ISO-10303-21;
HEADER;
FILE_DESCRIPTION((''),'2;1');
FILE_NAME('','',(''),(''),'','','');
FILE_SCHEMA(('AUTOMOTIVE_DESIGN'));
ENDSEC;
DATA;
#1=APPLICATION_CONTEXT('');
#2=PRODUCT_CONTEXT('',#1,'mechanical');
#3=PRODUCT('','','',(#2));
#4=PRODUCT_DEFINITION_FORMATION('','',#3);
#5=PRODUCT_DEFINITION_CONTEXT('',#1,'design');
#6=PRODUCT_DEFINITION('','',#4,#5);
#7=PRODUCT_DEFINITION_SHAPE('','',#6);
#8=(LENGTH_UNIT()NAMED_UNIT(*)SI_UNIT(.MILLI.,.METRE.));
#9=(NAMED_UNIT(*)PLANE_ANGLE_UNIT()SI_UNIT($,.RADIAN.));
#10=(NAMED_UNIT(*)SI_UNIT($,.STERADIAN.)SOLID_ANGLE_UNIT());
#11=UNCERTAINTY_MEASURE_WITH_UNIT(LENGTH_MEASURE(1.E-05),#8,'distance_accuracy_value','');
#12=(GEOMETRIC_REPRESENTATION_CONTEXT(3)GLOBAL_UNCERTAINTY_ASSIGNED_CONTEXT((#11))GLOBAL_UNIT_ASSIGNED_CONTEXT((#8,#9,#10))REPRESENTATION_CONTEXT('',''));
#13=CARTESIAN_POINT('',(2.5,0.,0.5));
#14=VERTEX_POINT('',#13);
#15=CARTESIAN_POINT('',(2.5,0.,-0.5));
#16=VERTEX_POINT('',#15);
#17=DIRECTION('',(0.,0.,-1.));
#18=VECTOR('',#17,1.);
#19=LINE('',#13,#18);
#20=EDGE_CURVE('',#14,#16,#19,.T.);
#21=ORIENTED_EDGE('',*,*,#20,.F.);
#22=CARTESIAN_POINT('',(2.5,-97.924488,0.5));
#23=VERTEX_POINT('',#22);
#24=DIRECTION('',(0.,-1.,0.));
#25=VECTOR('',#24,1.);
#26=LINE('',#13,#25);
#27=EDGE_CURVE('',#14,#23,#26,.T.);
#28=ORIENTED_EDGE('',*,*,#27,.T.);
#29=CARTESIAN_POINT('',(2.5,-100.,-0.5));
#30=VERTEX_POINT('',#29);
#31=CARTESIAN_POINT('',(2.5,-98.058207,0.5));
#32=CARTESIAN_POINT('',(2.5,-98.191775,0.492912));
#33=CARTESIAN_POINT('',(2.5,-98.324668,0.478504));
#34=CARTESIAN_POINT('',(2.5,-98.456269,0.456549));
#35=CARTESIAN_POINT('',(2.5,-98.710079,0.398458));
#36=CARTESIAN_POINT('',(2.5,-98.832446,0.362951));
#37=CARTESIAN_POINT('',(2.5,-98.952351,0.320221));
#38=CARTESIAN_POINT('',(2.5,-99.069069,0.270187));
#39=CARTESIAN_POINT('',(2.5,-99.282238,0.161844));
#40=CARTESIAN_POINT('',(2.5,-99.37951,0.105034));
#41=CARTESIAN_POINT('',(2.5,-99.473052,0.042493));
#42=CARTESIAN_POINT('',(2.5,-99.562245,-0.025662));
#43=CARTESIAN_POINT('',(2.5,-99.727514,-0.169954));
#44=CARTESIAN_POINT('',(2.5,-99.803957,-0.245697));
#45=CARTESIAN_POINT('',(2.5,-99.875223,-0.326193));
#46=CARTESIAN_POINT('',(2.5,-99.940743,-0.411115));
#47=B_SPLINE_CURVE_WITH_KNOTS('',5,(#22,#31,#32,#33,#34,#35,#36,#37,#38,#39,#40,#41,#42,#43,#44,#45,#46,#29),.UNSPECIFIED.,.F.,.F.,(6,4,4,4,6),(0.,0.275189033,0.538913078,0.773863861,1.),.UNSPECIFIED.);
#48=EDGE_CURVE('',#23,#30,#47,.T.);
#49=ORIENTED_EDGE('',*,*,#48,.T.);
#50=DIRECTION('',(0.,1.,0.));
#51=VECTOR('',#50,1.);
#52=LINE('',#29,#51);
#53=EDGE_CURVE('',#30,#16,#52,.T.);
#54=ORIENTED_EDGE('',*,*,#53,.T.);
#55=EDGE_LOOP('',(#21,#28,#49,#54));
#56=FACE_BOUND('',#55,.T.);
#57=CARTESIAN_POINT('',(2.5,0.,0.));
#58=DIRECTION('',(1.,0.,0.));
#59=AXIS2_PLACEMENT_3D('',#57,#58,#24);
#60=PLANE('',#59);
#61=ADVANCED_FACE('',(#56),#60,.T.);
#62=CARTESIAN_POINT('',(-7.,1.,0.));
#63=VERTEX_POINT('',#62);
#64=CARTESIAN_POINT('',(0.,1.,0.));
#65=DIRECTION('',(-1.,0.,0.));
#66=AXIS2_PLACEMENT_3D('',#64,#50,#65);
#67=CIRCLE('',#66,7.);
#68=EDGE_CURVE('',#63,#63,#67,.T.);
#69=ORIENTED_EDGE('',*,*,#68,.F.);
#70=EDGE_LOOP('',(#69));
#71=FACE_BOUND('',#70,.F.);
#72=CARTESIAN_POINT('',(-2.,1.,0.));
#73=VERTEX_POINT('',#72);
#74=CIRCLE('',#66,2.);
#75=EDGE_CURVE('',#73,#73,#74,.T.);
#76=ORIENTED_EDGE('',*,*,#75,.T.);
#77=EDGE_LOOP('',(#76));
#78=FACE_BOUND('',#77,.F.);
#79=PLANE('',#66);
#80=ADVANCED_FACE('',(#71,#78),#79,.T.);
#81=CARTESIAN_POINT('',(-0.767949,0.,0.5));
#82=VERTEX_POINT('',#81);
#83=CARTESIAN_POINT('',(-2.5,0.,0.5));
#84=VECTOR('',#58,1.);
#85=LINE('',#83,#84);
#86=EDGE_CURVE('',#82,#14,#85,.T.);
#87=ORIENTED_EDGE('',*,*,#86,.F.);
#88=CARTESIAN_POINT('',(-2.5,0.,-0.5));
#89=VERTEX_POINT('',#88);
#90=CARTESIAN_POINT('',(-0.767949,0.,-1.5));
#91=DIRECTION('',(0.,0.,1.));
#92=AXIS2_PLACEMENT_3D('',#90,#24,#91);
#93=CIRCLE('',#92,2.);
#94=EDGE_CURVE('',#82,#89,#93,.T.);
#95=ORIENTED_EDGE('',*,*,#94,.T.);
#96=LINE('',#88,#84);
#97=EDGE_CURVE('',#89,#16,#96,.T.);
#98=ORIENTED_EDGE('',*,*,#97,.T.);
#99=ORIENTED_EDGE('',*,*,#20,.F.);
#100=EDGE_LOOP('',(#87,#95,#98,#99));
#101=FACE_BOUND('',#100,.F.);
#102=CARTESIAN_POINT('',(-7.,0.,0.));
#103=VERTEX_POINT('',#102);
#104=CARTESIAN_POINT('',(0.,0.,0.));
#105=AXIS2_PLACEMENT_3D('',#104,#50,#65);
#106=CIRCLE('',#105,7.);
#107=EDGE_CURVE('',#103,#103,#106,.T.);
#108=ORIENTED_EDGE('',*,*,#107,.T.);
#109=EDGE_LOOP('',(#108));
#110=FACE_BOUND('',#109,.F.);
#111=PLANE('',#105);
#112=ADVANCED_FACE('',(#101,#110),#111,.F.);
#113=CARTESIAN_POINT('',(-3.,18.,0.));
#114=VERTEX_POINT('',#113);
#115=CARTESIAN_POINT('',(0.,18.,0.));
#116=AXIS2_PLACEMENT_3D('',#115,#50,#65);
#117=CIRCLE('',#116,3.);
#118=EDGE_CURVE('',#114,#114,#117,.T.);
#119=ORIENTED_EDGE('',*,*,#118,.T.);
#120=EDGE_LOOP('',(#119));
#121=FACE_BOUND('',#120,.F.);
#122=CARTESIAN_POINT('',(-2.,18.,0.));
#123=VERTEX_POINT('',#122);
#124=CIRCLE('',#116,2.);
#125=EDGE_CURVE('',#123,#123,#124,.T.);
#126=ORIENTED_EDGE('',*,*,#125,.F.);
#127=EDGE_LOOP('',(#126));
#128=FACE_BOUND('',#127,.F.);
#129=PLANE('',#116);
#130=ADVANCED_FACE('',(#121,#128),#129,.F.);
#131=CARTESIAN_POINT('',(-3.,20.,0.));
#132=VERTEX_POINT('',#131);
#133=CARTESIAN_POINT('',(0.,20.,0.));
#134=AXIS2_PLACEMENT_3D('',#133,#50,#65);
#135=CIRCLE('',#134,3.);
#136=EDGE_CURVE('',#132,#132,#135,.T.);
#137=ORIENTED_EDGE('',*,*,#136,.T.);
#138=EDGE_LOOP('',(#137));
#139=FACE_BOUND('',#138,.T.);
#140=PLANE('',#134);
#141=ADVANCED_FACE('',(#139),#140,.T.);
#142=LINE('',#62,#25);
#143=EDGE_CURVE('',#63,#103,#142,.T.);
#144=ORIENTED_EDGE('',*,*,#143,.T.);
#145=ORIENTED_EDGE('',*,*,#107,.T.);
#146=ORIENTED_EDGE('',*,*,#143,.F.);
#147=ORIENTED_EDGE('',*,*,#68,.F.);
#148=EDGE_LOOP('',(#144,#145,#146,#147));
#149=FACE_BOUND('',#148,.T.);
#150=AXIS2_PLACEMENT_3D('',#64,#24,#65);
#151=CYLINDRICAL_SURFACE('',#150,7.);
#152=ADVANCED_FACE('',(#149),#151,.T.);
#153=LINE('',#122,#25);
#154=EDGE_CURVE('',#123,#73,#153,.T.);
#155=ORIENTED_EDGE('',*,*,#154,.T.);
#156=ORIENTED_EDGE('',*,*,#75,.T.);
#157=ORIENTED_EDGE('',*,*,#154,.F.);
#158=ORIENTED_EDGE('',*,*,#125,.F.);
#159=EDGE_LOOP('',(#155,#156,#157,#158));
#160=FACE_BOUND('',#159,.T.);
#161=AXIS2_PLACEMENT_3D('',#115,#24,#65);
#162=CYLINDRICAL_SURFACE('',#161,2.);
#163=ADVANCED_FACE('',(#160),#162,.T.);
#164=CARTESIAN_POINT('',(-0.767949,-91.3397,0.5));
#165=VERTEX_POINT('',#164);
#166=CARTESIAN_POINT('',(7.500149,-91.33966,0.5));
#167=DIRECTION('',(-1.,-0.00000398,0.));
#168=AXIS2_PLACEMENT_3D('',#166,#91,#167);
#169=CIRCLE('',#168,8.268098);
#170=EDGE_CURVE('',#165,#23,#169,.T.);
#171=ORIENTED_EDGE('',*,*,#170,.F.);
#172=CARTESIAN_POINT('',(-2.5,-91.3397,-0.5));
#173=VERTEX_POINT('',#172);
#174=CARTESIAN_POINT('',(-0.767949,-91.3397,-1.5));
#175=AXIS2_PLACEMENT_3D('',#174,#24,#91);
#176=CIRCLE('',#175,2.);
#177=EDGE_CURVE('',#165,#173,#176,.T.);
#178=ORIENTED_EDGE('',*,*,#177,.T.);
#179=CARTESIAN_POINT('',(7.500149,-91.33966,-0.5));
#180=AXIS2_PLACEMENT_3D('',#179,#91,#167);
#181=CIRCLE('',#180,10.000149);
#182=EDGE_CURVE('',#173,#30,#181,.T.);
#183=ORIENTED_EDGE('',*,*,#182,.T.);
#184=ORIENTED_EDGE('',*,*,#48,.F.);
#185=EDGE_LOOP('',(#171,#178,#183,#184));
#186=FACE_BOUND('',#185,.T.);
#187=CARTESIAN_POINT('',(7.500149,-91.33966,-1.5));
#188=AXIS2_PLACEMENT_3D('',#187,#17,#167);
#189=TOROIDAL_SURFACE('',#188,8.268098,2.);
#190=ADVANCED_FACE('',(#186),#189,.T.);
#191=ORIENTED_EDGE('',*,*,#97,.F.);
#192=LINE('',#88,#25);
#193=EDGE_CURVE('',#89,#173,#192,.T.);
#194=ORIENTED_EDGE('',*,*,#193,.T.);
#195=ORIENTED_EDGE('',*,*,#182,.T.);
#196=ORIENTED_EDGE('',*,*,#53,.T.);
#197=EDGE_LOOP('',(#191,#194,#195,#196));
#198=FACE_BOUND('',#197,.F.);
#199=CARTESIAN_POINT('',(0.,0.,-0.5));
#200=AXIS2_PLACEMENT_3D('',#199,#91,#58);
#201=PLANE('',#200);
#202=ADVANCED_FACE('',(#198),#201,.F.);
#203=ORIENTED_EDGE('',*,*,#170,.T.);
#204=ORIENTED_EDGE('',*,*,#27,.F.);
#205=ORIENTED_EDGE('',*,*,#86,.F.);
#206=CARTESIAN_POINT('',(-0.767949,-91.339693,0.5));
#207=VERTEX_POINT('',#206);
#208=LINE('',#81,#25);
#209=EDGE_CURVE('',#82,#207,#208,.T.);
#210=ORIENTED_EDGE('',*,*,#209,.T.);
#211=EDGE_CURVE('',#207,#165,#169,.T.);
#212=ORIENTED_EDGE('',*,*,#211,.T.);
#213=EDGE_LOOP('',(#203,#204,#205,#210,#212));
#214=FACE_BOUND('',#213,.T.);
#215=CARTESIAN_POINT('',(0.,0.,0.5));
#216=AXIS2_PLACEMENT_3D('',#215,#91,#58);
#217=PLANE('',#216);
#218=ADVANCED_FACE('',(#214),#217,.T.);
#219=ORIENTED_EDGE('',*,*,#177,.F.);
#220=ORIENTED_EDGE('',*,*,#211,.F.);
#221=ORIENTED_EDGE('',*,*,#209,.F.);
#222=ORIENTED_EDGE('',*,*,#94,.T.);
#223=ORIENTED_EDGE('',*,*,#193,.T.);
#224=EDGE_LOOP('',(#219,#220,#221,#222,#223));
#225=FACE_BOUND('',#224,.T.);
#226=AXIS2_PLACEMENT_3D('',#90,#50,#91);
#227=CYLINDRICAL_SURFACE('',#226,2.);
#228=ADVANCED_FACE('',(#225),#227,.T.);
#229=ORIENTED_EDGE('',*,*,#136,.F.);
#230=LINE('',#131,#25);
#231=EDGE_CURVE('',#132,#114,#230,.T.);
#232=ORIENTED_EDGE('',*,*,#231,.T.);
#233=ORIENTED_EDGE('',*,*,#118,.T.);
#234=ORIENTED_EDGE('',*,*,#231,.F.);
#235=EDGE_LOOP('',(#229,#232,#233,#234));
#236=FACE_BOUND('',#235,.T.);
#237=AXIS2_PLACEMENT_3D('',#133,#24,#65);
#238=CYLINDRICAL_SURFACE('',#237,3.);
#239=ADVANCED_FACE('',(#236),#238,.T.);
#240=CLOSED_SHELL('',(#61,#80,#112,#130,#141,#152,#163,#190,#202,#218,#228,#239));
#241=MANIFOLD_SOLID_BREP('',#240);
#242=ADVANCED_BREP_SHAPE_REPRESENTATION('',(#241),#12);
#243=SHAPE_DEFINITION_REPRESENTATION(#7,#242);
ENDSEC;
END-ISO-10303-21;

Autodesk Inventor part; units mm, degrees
ref_plane "YZ Plane" through (0, 0, 0) normal (1, 0, 0) x (0, 1, 0)
ref_plane "XZ Plane" through (0, 0, 0) normal (0, 1, 0) x (-1, 0, 0)
ref_plane "XY Plane" through (0, 0, 0) normal (0, 0, 1) x (1, 0, 0)
sketch "Esboço1" plane through (0, 0, 0) normal (0, 0, 1) x (1, 0, 0)
  line L0 (-3, 20) -> (0, 20)
  line L1 (-3, 20) -> (-3, 18)
  line L2 (-3, 18) -> (-2, 18)
  line L3 (-2, 18) -> (-2, 1)
  line L4 (-2, 1) -> (-7, 1)
  line L5 (-7, 1) -> (-7, 0)
  line L6 (-7, 0) -> (0, 0)
  line L7 (0, 20) -> (0, 0)
  line L8 (-8.4, 0) -> (1.4, 0) projected
  line L9 (0, -4) -> (0, 24) projected
  dimension "d0" = 20
  dimension "d1" = 3
  dimension "d2" = 2
  dimension "d3" = 1
  dimension "d4" = 5
  dimension "d5" = 1
revolve "Revolução1" add sketch "Esboço1" angle 360 about axis through (0, -10, 0) along (0, 1, 0)
sketch "Esboço2" plane through (0, 0, 0) normal (0, 0, 1) x (1, 0, 0)
  line L0 (-2.5, 0) -> (2.5, 0)
  line L1 (2.5, 0) -> (2.5, -100)
  line L2 (2.5, -100) -> (2.5, -64.1353)
  arc A0 (-2.5, -91.3397) -> (2.5, -100) centre (7.5, -91.3397) ccw
  line L3 (-2.5, 0) -> (-2.5, -91.3397)
  line L4 (7, 0) -> (-7, 0) projected
  point P0 (0, 0)
  point P1 (0, 0)
  dimension "d7" = 100
  dimension "d8" = 5
  dimension "d10" = 10
extrude "Extrusão1" add sketch "Esboço2" along normal mid plane 1
fillet "Arredondamento1" radius 2 2 edges at (-1.1603, -96.3397, 0.5) (-2.5, -45.6699, 0.5)
properties part number "katana"
